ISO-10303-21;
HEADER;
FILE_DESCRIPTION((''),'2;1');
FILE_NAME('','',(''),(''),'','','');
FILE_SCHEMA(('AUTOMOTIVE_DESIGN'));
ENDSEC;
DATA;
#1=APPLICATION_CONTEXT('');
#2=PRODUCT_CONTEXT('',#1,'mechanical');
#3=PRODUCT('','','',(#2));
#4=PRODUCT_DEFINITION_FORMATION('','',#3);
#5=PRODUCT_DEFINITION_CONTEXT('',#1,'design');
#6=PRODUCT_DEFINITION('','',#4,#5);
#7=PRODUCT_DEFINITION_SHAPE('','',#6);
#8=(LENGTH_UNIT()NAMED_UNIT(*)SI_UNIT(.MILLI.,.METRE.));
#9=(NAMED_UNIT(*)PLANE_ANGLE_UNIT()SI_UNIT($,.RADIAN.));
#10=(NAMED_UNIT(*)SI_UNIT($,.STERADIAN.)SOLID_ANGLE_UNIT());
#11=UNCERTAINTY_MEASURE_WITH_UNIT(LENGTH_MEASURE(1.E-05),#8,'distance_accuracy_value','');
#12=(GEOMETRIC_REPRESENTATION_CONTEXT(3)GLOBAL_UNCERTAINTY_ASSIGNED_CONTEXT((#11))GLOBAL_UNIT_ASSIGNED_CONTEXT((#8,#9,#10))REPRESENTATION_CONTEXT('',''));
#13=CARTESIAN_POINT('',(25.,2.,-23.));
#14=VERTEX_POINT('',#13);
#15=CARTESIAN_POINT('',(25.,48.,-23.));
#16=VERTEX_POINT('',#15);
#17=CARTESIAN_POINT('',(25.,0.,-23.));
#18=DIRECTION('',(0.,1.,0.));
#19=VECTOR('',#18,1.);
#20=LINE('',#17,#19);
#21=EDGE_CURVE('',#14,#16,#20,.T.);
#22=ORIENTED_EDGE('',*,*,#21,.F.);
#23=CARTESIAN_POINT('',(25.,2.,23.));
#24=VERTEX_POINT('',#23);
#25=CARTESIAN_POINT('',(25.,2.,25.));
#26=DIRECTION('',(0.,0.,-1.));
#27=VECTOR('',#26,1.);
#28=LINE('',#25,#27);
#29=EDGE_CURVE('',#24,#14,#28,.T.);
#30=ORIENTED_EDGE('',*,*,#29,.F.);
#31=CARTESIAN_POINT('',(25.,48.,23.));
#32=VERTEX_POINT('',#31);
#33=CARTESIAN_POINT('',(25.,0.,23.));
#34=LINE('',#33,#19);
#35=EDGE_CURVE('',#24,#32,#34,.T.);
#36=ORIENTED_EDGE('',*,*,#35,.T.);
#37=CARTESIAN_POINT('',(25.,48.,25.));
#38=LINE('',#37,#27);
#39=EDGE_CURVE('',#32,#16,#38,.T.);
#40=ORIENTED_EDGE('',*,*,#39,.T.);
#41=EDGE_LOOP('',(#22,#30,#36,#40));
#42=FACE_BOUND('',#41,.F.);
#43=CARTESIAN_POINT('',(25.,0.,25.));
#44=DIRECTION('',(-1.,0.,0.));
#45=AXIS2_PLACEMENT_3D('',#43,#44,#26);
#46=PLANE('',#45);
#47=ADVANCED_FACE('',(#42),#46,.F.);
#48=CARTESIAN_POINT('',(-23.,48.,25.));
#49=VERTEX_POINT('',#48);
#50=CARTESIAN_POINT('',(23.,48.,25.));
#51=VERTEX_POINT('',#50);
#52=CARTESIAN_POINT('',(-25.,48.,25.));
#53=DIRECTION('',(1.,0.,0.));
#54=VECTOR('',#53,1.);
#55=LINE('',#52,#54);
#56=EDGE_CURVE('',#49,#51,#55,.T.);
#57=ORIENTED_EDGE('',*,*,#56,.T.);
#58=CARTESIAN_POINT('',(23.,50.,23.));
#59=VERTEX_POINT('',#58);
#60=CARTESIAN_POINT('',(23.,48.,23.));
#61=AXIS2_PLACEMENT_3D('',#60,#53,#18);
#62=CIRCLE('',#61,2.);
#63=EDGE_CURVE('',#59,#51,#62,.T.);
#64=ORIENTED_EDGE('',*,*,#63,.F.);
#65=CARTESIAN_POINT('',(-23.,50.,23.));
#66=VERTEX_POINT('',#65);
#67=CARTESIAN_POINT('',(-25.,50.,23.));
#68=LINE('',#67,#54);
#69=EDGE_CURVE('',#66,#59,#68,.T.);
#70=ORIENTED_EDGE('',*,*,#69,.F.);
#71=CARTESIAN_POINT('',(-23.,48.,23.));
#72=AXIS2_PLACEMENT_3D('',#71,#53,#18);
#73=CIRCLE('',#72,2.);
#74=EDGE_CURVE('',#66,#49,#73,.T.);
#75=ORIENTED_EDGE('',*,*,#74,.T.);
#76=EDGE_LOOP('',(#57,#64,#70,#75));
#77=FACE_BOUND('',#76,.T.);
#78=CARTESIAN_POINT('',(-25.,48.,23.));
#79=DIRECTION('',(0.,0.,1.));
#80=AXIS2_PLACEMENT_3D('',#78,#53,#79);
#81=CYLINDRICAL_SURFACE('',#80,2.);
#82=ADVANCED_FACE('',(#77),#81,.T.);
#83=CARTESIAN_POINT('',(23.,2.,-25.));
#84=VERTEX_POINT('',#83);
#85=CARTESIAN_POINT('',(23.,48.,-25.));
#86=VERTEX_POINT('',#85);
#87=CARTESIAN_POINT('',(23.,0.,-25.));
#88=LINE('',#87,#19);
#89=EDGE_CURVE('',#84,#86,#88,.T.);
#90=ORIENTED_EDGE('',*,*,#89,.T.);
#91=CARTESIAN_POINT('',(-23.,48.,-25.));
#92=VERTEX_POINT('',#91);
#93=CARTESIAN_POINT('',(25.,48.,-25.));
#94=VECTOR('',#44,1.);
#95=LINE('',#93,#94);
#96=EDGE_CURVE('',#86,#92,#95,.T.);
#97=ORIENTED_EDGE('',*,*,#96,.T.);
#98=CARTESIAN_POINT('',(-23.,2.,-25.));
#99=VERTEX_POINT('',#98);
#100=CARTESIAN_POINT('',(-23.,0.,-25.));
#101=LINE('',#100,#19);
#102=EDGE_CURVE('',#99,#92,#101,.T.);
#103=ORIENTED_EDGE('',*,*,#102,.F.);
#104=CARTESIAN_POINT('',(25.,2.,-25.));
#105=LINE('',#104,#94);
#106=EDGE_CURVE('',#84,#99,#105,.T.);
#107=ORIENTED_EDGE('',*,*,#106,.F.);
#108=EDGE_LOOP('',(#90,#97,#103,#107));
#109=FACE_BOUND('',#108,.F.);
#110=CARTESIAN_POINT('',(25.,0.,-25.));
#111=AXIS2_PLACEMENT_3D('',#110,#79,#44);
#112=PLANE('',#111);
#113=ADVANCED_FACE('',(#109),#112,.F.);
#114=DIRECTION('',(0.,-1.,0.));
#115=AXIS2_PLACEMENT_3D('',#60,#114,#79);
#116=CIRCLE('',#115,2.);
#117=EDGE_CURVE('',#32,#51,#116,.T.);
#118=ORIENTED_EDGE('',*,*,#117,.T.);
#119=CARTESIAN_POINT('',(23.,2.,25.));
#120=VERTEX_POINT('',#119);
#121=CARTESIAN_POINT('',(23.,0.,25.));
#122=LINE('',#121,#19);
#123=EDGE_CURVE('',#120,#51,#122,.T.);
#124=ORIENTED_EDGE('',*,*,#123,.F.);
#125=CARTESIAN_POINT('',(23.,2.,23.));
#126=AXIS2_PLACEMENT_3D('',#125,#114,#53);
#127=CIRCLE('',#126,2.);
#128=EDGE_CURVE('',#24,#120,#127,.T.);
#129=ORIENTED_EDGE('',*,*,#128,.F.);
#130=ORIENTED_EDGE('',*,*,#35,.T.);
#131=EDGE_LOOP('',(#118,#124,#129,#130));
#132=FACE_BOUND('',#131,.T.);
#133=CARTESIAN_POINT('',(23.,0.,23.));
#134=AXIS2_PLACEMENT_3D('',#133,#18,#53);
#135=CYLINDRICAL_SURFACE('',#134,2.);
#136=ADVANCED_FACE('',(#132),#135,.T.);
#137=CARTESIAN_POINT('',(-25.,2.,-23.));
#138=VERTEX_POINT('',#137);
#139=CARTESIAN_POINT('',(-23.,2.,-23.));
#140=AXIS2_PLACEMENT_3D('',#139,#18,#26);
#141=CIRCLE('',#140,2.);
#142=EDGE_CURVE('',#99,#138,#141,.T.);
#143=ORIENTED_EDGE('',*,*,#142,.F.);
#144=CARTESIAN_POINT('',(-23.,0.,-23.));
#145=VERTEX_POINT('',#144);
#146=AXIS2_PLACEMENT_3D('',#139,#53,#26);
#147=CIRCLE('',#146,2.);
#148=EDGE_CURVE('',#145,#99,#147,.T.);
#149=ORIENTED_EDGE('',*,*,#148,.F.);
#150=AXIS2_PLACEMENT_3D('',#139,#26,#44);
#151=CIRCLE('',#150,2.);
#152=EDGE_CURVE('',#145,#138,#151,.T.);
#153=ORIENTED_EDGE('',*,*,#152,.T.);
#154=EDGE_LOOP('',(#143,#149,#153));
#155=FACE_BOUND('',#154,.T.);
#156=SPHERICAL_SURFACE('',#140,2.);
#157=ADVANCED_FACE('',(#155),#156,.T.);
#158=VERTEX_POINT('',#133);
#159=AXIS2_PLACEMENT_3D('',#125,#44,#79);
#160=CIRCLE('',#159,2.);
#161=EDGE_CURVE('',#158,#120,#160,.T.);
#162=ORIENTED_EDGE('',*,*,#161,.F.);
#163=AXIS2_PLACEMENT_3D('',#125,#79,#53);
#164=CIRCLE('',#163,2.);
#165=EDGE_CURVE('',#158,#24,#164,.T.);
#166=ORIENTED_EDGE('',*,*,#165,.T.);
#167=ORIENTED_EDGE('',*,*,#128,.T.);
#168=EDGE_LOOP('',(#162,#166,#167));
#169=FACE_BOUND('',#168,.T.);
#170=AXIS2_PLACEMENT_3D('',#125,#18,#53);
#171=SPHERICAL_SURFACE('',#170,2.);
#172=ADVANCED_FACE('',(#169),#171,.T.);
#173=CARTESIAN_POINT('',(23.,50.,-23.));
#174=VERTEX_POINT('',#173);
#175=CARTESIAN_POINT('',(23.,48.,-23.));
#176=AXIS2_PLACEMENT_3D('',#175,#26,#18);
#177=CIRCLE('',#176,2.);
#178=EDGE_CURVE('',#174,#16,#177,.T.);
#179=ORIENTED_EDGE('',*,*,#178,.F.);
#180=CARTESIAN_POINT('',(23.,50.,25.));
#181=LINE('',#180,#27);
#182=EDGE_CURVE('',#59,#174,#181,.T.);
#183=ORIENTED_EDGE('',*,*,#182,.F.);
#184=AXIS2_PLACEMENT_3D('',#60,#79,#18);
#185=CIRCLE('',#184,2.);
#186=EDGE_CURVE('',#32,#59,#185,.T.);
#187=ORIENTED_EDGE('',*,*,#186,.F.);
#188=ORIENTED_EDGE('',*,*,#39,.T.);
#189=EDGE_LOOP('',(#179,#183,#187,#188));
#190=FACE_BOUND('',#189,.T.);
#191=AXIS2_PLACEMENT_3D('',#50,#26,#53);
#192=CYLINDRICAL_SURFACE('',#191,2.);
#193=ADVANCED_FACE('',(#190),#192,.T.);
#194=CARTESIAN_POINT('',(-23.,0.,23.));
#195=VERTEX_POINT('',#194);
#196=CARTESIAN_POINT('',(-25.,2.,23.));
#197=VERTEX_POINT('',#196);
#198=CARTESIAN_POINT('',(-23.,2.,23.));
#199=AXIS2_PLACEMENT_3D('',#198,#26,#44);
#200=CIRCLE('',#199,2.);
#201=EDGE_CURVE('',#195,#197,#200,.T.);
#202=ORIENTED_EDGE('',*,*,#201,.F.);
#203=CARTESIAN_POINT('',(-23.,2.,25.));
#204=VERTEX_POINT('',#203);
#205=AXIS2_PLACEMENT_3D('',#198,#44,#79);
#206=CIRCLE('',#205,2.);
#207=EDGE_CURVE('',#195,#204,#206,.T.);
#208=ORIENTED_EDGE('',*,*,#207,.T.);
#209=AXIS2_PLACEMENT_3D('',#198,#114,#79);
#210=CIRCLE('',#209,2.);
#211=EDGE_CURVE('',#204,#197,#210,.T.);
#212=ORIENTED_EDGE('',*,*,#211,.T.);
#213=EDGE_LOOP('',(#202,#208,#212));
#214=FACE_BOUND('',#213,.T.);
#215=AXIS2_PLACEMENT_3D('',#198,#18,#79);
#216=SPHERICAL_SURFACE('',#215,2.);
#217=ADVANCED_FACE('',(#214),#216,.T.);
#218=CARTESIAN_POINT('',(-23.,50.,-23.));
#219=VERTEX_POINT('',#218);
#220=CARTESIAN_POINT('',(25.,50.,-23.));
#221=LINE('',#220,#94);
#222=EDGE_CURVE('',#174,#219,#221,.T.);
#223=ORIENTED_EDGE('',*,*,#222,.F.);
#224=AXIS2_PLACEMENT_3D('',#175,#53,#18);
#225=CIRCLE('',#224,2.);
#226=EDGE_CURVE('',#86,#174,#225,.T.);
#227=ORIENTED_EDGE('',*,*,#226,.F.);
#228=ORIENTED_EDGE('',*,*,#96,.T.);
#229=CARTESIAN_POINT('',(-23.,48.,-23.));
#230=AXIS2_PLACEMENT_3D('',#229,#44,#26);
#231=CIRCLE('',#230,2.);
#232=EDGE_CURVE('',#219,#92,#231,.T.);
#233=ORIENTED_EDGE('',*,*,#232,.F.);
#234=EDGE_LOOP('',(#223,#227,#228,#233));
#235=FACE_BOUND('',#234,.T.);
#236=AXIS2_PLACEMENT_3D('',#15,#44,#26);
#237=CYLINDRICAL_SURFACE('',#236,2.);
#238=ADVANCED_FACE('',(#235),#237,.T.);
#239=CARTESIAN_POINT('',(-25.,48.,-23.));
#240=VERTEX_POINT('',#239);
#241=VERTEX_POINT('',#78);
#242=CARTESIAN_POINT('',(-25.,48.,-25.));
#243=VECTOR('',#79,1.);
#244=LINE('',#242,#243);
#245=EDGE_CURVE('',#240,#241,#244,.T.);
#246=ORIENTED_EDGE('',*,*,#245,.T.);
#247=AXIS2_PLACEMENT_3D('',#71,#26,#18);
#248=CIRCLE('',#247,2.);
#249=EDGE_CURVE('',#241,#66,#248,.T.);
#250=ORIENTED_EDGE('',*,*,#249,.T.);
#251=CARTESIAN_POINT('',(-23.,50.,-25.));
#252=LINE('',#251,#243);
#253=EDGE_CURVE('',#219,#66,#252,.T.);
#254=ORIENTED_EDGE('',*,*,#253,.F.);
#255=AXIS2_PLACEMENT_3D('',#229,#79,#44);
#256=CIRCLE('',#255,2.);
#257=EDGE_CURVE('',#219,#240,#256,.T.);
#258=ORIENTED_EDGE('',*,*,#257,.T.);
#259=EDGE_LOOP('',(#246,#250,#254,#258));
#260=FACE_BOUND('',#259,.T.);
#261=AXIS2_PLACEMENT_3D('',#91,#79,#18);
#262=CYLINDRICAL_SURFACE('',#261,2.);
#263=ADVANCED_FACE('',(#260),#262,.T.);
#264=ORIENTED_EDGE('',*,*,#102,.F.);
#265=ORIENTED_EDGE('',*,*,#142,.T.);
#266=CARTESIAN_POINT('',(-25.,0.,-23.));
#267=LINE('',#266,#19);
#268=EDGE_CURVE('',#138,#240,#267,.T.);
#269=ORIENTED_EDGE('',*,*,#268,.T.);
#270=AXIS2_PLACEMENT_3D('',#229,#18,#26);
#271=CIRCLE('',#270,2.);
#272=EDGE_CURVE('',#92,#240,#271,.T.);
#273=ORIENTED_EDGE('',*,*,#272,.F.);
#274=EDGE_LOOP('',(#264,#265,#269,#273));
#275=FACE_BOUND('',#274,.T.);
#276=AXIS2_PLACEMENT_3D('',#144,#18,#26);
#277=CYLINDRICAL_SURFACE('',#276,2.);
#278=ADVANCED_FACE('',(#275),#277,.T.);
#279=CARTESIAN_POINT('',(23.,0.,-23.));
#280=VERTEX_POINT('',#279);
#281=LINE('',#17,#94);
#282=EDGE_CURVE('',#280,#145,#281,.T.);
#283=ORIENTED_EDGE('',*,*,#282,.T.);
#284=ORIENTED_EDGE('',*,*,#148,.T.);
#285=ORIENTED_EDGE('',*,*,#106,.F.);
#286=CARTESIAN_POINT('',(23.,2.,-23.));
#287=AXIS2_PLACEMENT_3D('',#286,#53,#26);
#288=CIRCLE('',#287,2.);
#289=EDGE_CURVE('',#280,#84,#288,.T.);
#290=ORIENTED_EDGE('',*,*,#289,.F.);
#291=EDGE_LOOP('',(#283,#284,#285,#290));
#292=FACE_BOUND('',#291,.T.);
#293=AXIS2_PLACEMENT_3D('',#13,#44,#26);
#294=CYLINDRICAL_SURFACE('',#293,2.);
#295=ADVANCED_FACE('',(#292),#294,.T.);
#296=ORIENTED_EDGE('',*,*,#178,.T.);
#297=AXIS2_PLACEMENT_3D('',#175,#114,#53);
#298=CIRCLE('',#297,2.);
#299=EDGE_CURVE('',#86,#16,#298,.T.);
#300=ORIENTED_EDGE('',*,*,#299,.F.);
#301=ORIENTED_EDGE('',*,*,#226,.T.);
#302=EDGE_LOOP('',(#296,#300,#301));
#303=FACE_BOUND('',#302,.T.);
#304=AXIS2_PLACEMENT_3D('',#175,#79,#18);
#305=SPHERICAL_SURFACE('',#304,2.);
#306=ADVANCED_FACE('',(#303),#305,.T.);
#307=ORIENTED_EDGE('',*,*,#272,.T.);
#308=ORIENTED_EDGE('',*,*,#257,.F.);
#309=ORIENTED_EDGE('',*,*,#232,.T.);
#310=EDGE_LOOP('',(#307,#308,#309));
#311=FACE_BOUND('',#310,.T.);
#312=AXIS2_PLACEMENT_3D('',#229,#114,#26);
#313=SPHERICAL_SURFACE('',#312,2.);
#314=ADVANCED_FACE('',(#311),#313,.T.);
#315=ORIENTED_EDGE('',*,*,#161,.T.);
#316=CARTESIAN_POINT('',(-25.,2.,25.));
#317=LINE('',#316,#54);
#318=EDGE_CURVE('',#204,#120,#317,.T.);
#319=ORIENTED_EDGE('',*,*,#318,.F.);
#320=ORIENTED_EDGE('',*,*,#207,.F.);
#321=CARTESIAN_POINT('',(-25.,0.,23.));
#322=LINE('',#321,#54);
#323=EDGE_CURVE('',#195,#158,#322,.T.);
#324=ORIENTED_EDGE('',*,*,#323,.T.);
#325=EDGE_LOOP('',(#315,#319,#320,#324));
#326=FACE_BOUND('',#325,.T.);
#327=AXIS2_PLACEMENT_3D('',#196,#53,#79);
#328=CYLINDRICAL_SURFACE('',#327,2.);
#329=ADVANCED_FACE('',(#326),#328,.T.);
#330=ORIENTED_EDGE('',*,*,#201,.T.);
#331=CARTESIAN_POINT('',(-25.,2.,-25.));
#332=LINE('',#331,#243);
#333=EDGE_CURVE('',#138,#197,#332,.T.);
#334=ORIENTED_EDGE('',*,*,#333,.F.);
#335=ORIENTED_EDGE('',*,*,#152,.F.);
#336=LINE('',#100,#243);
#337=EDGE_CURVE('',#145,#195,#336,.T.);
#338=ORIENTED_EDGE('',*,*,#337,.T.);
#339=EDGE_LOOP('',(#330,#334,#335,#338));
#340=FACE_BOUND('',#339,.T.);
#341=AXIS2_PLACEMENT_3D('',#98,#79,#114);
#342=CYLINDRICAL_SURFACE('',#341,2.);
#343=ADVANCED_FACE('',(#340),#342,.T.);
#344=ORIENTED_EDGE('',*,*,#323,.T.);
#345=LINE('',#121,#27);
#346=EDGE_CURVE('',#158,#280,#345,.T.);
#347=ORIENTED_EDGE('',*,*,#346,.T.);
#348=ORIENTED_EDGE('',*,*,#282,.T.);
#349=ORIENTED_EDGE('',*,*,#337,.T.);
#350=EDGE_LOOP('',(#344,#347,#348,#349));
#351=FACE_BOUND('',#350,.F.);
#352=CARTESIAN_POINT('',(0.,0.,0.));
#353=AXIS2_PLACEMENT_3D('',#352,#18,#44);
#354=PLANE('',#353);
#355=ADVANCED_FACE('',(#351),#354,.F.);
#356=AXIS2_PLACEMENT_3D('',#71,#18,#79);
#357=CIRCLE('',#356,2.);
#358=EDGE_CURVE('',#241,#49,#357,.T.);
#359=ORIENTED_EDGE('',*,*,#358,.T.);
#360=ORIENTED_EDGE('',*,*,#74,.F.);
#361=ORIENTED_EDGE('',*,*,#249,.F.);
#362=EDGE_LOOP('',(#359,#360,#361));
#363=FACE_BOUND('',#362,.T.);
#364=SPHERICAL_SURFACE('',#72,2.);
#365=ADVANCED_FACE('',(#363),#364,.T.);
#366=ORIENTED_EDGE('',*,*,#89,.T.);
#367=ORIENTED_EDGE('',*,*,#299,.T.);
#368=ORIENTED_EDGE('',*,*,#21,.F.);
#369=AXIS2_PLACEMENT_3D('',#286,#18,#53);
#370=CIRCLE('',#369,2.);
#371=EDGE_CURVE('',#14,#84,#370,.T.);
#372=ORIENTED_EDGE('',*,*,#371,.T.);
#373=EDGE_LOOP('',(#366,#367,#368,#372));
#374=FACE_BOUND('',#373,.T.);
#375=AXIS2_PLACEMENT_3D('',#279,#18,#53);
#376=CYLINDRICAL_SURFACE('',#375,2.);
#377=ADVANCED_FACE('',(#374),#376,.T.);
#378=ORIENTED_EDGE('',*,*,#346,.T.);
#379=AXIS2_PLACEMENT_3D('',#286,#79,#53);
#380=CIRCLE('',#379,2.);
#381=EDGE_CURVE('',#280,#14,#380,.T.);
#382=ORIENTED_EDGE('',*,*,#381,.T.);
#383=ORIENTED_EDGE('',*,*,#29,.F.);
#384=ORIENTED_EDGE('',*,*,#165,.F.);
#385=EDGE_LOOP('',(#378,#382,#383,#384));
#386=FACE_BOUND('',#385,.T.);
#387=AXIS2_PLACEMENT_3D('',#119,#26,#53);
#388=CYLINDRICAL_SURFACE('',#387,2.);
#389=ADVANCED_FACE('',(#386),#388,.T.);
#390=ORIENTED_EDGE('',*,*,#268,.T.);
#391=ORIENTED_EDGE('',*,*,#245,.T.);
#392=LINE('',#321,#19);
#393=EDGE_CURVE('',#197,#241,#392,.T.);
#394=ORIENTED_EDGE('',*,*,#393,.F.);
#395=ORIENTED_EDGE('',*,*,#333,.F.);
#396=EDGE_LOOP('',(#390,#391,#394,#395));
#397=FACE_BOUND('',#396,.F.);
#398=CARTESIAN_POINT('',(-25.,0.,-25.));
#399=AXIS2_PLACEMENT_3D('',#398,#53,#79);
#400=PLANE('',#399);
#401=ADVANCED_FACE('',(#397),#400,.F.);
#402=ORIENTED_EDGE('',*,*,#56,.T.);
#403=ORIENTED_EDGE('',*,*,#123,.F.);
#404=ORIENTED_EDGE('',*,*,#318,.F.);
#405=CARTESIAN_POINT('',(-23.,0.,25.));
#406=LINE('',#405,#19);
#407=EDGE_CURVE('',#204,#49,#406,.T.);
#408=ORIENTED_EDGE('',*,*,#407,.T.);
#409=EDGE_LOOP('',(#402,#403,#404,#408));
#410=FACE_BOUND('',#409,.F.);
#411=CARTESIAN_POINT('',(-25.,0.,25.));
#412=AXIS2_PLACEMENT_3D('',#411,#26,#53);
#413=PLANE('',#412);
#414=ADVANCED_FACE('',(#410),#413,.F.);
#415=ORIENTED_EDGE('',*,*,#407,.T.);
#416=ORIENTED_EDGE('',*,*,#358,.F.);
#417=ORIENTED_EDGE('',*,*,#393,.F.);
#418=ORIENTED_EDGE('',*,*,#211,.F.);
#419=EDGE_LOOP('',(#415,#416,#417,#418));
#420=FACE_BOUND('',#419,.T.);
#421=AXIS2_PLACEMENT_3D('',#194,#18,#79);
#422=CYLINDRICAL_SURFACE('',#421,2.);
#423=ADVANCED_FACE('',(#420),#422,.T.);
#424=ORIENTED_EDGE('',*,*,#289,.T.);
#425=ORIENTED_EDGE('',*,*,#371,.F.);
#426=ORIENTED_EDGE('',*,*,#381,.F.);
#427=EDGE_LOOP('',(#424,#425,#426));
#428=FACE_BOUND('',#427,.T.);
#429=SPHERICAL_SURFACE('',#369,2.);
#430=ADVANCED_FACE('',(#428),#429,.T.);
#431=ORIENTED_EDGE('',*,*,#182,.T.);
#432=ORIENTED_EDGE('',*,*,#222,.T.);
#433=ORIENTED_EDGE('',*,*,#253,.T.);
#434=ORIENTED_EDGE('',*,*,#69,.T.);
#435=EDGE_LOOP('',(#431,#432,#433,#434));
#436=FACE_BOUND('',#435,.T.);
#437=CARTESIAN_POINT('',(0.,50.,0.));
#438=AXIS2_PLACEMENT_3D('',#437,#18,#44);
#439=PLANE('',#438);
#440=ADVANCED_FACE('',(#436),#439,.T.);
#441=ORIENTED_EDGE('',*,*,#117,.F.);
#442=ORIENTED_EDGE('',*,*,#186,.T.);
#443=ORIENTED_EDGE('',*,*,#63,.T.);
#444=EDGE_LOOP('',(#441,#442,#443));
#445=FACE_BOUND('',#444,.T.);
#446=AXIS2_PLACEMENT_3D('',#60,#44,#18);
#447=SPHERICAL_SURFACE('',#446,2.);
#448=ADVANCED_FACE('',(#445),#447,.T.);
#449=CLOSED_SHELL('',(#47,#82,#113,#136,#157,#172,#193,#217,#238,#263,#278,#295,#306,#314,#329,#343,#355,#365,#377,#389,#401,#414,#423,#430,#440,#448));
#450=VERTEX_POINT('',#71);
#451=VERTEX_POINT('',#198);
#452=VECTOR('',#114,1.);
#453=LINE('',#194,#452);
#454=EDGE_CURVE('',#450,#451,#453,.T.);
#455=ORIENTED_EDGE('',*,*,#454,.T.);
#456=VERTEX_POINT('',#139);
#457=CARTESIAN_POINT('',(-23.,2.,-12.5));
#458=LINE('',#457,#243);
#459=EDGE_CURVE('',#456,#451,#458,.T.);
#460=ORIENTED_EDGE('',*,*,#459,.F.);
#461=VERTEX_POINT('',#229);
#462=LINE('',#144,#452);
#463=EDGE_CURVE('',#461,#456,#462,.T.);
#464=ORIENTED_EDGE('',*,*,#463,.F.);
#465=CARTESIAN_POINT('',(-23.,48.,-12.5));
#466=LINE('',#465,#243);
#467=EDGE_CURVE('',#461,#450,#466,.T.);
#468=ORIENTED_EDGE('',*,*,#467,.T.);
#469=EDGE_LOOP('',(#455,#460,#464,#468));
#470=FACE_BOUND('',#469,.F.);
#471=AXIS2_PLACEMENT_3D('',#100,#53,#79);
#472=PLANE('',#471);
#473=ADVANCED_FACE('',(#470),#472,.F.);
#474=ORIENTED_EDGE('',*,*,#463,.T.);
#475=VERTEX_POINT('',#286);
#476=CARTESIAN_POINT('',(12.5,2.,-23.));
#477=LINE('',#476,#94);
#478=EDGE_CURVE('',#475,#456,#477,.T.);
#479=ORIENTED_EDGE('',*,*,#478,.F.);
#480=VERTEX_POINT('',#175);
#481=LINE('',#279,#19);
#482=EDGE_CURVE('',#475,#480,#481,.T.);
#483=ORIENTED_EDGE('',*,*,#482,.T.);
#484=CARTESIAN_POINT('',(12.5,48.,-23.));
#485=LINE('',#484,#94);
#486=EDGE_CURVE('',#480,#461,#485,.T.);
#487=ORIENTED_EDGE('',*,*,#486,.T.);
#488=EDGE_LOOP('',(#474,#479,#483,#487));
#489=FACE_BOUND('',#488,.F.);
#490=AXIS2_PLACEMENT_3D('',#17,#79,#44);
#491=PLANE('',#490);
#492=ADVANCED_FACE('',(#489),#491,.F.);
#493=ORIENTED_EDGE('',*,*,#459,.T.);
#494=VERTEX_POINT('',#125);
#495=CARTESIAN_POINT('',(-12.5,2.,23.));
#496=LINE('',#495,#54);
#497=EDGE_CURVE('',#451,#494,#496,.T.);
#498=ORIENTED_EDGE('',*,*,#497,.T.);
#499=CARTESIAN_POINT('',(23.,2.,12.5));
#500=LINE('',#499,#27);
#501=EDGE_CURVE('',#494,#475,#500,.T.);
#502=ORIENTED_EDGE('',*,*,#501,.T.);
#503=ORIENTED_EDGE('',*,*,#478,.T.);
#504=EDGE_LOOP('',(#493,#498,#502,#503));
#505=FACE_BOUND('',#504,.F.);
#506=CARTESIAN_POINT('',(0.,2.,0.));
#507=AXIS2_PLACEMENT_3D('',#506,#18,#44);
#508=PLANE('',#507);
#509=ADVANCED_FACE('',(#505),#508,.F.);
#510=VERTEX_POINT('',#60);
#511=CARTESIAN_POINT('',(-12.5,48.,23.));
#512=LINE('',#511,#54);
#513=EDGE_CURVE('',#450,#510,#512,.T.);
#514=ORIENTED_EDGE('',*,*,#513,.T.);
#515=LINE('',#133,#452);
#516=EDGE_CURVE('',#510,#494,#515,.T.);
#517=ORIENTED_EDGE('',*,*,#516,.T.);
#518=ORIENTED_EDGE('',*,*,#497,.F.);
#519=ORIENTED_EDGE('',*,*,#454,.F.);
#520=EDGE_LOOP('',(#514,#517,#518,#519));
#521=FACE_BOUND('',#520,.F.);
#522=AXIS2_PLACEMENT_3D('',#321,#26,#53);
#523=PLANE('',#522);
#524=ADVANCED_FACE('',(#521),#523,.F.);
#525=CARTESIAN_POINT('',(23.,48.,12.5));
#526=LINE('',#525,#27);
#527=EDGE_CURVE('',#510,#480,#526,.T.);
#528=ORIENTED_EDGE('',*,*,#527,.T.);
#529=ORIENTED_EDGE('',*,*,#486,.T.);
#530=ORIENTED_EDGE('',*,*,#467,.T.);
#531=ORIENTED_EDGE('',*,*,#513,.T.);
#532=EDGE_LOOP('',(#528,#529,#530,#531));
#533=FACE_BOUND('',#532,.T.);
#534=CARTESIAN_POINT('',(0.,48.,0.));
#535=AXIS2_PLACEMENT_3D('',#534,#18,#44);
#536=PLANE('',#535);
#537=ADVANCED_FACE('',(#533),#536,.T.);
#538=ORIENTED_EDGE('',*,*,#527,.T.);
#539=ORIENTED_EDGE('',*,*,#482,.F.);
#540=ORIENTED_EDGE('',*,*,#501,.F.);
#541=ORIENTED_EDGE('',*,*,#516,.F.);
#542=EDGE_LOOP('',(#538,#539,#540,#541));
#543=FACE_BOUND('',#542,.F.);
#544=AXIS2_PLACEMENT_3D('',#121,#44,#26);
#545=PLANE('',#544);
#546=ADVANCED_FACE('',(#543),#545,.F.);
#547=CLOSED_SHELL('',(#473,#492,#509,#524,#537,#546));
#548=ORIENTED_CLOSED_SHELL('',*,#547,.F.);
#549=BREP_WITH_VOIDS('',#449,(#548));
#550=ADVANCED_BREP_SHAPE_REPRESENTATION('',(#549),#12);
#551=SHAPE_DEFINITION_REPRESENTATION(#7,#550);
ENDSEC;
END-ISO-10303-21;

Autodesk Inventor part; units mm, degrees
ref_plane "YZ Plane" through (0, 0, 0) normal (1, 0, 0) x (0, 1, 0)
ref_plane "XZ Plane" through (0, 0, 0) normal (0, 1, 0) x (-1, 0, 0)
ref_plane "XY Plane" through (0, 0, 0) normal (0, 0, 1) x (1, 0, 0)
sketch "Sketch1" plane through (0, 0, 0) normal (0, 1, 0) x (-1, 0, 0)
  line L0 (-25, -25) -> (25, -25)
  line L1 (25, -25) -> (25, 25)
  line L2 (25, 25) -> (-25, 25)
  line L3 (-25, 25) -> (-25, -25)
  line L4 (-25, -25) -> (25, 25) construction
  line L5 (25, -25) -> (-25, 25) construction
  point P0 (0, 0)
  dimension "d0" = 50
  dimension "d1" = 50
extrude "Extrusion1" add sketch "Sketch1" along normal blind 50
shell "Shell1" thickness 2 removed faces 0
fillet "Fillet1" radius 2 12 edges at (0, 50, 25) (-25, 25, -25) (25, 50, 0) (0, 50, -25) (-25, 50, 0) (25, 25, 25) (-25, 25, 25) (25, 25, -25) (25, 0, 0) (0, 0, 25) (0, 0, -25) (-25, 0, 0)
properties part number "block"
